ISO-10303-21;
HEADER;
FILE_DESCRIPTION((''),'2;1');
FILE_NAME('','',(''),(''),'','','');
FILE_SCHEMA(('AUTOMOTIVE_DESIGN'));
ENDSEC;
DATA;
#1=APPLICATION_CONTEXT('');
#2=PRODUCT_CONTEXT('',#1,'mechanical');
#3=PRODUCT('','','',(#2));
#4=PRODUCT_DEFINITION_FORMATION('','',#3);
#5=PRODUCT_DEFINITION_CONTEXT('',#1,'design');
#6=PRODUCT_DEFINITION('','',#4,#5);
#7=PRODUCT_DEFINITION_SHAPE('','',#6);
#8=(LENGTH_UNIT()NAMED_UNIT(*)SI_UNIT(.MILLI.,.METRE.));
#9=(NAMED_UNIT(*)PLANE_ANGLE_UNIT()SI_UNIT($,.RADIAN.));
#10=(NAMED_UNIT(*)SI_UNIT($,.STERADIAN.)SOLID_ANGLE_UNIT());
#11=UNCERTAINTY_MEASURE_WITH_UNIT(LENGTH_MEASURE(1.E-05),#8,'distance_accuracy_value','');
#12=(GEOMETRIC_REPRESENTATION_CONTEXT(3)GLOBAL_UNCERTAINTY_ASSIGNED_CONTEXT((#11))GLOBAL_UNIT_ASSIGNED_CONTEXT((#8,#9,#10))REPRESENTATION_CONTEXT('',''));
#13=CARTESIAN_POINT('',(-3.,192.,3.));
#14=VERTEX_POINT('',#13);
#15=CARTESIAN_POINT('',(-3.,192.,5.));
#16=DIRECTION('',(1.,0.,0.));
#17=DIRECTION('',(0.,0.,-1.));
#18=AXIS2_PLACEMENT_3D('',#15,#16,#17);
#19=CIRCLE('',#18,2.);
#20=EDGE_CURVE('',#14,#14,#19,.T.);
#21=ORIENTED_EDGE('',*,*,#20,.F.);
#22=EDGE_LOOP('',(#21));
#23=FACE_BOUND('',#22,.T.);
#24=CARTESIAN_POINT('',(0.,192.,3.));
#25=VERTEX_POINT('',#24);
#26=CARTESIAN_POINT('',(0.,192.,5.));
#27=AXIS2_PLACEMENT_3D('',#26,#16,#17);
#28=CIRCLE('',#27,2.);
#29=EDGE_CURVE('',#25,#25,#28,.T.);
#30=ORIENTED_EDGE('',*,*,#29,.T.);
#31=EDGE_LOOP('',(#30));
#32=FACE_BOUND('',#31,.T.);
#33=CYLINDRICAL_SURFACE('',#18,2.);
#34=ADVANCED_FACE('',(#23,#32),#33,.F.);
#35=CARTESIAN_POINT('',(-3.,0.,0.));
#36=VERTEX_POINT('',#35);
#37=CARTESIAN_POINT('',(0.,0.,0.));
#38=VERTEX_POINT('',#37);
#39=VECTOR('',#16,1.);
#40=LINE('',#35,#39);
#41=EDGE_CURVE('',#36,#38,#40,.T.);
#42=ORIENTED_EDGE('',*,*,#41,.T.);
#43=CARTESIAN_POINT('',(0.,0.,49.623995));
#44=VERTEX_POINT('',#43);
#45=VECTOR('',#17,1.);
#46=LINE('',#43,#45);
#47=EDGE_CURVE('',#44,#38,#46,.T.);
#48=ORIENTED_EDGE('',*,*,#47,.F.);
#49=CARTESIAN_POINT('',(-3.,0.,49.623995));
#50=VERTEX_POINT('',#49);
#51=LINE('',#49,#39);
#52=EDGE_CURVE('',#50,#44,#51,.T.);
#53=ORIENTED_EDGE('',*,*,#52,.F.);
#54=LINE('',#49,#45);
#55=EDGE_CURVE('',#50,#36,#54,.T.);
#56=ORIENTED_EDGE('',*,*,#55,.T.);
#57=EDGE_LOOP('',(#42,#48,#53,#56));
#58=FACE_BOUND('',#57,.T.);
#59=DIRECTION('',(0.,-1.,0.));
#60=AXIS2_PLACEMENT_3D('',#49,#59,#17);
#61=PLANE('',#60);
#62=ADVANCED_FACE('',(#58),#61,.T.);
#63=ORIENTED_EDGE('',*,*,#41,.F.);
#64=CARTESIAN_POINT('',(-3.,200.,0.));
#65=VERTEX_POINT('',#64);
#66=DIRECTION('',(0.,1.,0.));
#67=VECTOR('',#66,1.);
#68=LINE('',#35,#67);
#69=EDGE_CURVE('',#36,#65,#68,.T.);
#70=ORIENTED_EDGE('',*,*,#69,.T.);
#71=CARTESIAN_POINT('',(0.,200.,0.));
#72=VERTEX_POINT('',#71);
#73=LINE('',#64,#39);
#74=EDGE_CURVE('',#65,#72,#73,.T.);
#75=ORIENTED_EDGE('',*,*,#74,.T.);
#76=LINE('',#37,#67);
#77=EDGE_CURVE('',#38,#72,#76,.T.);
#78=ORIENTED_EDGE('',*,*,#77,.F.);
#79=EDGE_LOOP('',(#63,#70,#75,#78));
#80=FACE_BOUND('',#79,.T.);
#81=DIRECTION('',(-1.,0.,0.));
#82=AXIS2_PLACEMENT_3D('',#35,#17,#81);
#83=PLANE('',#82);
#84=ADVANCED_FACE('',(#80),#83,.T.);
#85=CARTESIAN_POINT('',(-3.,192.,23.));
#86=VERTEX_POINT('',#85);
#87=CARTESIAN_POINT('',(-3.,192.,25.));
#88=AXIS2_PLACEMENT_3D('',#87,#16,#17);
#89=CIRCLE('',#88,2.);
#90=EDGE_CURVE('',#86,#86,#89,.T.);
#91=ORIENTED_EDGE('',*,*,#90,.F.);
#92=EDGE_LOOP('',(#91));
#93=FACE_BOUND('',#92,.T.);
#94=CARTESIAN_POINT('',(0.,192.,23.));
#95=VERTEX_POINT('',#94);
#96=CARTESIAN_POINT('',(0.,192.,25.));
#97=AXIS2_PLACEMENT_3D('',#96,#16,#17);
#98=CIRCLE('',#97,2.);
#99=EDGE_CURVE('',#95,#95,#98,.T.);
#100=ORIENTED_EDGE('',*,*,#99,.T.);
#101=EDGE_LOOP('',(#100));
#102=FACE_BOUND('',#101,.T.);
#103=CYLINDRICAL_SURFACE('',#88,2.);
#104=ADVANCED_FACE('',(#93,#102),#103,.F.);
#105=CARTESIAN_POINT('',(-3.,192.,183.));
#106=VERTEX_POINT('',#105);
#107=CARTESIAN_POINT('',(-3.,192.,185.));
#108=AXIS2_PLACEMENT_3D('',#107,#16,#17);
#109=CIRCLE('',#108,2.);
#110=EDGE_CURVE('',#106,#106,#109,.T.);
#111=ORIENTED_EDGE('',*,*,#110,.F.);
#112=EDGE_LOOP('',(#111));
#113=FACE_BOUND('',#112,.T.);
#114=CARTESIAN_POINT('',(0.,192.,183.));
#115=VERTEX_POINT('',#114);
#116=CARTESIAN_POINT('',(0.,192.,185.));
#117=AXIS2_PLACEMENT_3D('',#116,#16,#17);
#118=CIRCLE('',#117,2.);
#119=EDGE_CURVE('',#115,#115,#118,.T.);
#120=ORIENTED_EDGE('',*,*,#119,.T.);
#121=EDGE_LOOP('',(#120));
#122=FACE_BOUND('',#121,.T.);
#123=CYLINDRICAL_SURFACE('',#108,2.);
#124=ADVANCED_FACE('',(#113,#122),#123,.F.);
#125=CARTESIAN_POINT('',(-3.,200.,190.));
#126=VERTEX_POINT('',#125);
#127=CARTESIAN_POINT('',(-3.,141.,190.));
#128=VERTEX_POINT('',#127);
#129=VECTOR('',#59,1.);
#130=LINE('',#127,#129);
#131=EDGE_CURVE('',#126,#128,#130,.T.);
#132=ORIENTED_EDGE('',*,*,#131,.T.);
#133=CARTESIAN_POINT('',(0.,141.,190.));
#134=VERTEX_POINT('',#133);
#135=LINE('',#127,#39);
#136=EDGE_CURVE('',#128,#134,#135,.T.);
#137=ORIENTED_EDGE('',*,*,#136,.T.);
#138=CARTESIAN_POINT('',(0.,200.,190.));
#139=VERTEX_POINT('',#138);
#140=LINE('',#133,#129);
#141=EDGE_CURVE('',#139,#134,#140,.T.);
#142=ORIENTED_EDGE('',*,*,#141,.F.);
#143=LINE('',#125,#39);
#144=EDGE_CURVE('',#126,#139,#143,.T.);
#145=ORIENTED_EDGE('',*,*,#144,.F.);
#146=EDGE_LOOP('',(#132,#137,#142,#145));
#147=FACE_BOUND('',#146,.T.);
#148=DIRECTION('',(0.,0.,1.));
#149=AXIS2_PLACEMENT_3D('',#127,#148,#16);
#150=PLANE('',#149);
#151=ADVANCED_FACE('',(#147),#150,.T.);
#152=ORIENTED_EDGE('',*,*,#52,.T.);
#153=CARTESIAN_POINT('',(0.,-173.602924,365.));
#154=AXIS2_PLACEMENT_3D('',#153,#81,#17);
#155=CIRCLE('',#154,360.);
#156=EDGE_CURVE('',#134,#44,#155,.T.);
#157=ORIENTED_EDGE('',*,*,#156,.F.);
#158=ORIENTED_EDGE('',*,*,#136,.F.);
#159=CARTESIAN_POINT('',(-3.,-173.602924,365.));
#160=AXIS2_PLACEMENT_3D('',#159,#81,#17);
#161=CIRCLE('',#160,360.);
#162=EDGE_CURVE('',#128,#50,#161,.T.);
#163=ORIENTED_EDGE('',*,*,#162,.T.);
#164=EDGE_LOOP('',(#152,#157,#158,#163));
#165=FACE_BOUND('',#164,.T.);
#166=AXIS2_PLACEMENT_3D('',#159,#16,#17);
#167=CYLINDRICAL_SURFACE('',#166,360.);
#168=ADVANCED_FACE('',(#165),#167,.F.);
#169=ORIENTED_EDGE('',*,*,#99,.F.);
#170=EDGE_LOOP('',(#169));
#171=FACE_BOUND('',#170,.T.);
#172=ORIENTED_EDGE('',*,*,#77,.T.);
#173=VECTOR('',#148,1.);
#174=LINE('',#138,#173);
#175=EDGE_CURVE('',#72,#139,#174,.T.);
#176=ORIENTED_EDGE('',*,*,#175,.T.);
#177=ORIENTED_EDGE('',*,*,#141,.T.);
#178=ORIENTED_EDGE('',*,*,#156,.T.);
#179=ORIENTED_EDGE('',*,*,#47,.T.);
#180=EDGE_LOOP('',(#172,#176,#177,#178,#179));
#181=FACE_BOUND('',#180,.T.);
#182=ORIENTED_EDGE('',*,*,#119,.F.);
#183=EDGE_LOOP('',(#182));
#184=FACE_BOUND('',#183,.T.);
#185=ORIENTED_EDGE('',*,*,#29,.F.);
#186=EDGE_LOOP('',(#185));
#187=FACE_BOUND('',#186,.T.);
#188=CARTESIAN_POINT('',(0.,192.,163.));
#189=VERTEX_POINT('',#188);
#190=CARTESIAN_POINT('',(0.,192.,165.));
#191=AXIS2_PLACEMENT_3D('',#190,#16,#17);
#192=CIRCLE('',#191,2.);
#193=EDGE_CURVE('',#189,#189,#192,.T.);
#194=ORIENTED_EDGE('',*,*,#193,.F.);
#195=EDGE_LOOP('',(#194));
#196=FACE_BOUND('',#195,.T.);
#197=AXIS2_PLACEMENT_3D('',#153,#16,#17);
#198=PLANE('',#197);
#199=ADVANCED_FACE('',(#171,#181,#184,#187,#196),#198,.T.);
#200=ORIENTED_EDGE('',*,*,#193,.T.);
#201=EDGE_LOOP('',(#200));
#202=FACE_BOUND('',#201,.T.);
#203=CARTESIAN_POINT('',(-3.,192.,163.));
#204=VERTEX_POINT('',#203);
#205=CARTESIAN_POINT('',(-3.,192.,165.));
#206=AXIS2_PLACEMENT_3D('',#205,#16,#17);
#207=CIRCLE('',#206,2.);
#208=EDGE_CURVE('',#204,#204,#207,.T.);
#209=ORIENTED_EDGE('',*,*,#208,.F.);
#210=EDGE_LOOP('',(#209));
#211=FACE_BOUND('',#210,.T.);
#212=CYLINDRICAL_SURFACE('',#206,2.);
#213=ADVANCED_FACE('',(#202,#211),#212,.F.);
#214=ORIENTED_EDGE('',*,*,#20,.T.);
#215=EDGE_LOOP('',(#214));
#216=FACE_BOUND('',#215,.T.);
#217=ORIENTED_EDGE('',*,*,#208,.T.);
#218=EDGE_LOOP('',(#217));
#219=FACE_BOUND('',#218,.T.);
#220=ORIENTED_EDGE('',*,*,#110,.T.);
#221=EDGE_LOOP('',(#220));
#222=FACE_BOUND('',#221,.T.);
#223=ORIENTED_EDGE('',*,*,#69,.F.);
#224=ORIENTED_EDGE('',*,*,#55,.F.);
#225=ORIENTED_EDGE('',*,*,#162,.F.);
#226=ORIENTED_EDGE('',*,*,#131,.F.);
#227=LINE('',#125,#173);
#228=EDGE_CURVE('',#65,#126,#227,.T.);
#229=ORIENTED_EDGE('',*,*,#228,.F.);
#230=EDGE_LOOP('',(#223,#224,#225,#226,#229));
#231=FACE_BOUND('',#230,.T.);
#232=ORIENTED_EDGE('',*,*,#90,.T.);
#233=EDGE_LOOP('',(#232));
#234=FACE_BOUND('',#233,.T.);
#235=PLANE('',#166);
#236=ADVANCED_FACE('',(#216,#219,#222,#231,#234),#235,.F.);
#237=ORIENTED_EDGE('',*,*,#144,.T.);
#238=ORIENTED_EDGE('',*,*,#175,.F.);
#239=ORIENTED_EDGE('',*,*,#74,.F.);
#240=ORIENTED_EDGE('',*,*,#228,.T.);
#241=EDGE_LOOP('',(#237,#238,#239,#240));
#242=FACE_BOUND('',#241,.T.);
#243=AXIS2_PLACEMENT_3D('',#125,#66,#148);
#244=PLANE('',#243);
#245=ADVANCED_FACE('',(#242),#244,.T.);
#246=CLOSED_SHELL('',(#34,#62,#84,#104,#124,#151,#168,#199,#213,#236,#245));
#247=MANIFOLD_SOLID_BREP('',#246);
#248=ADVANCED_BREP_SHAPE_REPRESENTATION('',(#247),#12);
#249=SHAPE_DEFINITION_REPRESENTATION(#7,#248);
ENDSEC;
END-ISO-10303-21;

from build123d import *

# Parameters (mm, degrees)
SKETCH_1_R             = 2
SM_BASE_FLANGE_1_DEPTH = 3


# Sheet-metal steps are written as plain solids
with BuildPart() as part:
    # Sketch 1 → Базовая кромка1 (new body)
    with BuildSketch(Plane(origin=(0, 0, 0), x_dir=(0, 0, -1), z_dir=(1, 0, 0))):
        with BuildLine():
            Line((-49.62399479, 0), (0, 0))
            Line((0, 0), (0, 200))
            Line((0, 200), (-190, 200))
            Line((-190, 200), (-190, 141))
            ThreePointArc((-190, 141), (-109.877663421, 80.390369629), (-49.62399479, 0))
        make_face()
        with Locations((-185, 192)):
            Circle(SKETCH_1_R, mode=Mode.SUBTRACT)
        with Locations((-165, 192)):
            Circle(SKETCH_1_R, mode=Mode.SUBTRACT)
        with Locations((-25, 192)):
            Circle(SKETCH_1_R, mode=Mode.SUBTRACT)
        with Locations((-5, 192)):
            Circle(SKETCH_1_R, mode=Mode.SUBTRACT)
    extrude(amount=-SM_BASE_FLANGE_1_DEPTH)


solid = part.part
